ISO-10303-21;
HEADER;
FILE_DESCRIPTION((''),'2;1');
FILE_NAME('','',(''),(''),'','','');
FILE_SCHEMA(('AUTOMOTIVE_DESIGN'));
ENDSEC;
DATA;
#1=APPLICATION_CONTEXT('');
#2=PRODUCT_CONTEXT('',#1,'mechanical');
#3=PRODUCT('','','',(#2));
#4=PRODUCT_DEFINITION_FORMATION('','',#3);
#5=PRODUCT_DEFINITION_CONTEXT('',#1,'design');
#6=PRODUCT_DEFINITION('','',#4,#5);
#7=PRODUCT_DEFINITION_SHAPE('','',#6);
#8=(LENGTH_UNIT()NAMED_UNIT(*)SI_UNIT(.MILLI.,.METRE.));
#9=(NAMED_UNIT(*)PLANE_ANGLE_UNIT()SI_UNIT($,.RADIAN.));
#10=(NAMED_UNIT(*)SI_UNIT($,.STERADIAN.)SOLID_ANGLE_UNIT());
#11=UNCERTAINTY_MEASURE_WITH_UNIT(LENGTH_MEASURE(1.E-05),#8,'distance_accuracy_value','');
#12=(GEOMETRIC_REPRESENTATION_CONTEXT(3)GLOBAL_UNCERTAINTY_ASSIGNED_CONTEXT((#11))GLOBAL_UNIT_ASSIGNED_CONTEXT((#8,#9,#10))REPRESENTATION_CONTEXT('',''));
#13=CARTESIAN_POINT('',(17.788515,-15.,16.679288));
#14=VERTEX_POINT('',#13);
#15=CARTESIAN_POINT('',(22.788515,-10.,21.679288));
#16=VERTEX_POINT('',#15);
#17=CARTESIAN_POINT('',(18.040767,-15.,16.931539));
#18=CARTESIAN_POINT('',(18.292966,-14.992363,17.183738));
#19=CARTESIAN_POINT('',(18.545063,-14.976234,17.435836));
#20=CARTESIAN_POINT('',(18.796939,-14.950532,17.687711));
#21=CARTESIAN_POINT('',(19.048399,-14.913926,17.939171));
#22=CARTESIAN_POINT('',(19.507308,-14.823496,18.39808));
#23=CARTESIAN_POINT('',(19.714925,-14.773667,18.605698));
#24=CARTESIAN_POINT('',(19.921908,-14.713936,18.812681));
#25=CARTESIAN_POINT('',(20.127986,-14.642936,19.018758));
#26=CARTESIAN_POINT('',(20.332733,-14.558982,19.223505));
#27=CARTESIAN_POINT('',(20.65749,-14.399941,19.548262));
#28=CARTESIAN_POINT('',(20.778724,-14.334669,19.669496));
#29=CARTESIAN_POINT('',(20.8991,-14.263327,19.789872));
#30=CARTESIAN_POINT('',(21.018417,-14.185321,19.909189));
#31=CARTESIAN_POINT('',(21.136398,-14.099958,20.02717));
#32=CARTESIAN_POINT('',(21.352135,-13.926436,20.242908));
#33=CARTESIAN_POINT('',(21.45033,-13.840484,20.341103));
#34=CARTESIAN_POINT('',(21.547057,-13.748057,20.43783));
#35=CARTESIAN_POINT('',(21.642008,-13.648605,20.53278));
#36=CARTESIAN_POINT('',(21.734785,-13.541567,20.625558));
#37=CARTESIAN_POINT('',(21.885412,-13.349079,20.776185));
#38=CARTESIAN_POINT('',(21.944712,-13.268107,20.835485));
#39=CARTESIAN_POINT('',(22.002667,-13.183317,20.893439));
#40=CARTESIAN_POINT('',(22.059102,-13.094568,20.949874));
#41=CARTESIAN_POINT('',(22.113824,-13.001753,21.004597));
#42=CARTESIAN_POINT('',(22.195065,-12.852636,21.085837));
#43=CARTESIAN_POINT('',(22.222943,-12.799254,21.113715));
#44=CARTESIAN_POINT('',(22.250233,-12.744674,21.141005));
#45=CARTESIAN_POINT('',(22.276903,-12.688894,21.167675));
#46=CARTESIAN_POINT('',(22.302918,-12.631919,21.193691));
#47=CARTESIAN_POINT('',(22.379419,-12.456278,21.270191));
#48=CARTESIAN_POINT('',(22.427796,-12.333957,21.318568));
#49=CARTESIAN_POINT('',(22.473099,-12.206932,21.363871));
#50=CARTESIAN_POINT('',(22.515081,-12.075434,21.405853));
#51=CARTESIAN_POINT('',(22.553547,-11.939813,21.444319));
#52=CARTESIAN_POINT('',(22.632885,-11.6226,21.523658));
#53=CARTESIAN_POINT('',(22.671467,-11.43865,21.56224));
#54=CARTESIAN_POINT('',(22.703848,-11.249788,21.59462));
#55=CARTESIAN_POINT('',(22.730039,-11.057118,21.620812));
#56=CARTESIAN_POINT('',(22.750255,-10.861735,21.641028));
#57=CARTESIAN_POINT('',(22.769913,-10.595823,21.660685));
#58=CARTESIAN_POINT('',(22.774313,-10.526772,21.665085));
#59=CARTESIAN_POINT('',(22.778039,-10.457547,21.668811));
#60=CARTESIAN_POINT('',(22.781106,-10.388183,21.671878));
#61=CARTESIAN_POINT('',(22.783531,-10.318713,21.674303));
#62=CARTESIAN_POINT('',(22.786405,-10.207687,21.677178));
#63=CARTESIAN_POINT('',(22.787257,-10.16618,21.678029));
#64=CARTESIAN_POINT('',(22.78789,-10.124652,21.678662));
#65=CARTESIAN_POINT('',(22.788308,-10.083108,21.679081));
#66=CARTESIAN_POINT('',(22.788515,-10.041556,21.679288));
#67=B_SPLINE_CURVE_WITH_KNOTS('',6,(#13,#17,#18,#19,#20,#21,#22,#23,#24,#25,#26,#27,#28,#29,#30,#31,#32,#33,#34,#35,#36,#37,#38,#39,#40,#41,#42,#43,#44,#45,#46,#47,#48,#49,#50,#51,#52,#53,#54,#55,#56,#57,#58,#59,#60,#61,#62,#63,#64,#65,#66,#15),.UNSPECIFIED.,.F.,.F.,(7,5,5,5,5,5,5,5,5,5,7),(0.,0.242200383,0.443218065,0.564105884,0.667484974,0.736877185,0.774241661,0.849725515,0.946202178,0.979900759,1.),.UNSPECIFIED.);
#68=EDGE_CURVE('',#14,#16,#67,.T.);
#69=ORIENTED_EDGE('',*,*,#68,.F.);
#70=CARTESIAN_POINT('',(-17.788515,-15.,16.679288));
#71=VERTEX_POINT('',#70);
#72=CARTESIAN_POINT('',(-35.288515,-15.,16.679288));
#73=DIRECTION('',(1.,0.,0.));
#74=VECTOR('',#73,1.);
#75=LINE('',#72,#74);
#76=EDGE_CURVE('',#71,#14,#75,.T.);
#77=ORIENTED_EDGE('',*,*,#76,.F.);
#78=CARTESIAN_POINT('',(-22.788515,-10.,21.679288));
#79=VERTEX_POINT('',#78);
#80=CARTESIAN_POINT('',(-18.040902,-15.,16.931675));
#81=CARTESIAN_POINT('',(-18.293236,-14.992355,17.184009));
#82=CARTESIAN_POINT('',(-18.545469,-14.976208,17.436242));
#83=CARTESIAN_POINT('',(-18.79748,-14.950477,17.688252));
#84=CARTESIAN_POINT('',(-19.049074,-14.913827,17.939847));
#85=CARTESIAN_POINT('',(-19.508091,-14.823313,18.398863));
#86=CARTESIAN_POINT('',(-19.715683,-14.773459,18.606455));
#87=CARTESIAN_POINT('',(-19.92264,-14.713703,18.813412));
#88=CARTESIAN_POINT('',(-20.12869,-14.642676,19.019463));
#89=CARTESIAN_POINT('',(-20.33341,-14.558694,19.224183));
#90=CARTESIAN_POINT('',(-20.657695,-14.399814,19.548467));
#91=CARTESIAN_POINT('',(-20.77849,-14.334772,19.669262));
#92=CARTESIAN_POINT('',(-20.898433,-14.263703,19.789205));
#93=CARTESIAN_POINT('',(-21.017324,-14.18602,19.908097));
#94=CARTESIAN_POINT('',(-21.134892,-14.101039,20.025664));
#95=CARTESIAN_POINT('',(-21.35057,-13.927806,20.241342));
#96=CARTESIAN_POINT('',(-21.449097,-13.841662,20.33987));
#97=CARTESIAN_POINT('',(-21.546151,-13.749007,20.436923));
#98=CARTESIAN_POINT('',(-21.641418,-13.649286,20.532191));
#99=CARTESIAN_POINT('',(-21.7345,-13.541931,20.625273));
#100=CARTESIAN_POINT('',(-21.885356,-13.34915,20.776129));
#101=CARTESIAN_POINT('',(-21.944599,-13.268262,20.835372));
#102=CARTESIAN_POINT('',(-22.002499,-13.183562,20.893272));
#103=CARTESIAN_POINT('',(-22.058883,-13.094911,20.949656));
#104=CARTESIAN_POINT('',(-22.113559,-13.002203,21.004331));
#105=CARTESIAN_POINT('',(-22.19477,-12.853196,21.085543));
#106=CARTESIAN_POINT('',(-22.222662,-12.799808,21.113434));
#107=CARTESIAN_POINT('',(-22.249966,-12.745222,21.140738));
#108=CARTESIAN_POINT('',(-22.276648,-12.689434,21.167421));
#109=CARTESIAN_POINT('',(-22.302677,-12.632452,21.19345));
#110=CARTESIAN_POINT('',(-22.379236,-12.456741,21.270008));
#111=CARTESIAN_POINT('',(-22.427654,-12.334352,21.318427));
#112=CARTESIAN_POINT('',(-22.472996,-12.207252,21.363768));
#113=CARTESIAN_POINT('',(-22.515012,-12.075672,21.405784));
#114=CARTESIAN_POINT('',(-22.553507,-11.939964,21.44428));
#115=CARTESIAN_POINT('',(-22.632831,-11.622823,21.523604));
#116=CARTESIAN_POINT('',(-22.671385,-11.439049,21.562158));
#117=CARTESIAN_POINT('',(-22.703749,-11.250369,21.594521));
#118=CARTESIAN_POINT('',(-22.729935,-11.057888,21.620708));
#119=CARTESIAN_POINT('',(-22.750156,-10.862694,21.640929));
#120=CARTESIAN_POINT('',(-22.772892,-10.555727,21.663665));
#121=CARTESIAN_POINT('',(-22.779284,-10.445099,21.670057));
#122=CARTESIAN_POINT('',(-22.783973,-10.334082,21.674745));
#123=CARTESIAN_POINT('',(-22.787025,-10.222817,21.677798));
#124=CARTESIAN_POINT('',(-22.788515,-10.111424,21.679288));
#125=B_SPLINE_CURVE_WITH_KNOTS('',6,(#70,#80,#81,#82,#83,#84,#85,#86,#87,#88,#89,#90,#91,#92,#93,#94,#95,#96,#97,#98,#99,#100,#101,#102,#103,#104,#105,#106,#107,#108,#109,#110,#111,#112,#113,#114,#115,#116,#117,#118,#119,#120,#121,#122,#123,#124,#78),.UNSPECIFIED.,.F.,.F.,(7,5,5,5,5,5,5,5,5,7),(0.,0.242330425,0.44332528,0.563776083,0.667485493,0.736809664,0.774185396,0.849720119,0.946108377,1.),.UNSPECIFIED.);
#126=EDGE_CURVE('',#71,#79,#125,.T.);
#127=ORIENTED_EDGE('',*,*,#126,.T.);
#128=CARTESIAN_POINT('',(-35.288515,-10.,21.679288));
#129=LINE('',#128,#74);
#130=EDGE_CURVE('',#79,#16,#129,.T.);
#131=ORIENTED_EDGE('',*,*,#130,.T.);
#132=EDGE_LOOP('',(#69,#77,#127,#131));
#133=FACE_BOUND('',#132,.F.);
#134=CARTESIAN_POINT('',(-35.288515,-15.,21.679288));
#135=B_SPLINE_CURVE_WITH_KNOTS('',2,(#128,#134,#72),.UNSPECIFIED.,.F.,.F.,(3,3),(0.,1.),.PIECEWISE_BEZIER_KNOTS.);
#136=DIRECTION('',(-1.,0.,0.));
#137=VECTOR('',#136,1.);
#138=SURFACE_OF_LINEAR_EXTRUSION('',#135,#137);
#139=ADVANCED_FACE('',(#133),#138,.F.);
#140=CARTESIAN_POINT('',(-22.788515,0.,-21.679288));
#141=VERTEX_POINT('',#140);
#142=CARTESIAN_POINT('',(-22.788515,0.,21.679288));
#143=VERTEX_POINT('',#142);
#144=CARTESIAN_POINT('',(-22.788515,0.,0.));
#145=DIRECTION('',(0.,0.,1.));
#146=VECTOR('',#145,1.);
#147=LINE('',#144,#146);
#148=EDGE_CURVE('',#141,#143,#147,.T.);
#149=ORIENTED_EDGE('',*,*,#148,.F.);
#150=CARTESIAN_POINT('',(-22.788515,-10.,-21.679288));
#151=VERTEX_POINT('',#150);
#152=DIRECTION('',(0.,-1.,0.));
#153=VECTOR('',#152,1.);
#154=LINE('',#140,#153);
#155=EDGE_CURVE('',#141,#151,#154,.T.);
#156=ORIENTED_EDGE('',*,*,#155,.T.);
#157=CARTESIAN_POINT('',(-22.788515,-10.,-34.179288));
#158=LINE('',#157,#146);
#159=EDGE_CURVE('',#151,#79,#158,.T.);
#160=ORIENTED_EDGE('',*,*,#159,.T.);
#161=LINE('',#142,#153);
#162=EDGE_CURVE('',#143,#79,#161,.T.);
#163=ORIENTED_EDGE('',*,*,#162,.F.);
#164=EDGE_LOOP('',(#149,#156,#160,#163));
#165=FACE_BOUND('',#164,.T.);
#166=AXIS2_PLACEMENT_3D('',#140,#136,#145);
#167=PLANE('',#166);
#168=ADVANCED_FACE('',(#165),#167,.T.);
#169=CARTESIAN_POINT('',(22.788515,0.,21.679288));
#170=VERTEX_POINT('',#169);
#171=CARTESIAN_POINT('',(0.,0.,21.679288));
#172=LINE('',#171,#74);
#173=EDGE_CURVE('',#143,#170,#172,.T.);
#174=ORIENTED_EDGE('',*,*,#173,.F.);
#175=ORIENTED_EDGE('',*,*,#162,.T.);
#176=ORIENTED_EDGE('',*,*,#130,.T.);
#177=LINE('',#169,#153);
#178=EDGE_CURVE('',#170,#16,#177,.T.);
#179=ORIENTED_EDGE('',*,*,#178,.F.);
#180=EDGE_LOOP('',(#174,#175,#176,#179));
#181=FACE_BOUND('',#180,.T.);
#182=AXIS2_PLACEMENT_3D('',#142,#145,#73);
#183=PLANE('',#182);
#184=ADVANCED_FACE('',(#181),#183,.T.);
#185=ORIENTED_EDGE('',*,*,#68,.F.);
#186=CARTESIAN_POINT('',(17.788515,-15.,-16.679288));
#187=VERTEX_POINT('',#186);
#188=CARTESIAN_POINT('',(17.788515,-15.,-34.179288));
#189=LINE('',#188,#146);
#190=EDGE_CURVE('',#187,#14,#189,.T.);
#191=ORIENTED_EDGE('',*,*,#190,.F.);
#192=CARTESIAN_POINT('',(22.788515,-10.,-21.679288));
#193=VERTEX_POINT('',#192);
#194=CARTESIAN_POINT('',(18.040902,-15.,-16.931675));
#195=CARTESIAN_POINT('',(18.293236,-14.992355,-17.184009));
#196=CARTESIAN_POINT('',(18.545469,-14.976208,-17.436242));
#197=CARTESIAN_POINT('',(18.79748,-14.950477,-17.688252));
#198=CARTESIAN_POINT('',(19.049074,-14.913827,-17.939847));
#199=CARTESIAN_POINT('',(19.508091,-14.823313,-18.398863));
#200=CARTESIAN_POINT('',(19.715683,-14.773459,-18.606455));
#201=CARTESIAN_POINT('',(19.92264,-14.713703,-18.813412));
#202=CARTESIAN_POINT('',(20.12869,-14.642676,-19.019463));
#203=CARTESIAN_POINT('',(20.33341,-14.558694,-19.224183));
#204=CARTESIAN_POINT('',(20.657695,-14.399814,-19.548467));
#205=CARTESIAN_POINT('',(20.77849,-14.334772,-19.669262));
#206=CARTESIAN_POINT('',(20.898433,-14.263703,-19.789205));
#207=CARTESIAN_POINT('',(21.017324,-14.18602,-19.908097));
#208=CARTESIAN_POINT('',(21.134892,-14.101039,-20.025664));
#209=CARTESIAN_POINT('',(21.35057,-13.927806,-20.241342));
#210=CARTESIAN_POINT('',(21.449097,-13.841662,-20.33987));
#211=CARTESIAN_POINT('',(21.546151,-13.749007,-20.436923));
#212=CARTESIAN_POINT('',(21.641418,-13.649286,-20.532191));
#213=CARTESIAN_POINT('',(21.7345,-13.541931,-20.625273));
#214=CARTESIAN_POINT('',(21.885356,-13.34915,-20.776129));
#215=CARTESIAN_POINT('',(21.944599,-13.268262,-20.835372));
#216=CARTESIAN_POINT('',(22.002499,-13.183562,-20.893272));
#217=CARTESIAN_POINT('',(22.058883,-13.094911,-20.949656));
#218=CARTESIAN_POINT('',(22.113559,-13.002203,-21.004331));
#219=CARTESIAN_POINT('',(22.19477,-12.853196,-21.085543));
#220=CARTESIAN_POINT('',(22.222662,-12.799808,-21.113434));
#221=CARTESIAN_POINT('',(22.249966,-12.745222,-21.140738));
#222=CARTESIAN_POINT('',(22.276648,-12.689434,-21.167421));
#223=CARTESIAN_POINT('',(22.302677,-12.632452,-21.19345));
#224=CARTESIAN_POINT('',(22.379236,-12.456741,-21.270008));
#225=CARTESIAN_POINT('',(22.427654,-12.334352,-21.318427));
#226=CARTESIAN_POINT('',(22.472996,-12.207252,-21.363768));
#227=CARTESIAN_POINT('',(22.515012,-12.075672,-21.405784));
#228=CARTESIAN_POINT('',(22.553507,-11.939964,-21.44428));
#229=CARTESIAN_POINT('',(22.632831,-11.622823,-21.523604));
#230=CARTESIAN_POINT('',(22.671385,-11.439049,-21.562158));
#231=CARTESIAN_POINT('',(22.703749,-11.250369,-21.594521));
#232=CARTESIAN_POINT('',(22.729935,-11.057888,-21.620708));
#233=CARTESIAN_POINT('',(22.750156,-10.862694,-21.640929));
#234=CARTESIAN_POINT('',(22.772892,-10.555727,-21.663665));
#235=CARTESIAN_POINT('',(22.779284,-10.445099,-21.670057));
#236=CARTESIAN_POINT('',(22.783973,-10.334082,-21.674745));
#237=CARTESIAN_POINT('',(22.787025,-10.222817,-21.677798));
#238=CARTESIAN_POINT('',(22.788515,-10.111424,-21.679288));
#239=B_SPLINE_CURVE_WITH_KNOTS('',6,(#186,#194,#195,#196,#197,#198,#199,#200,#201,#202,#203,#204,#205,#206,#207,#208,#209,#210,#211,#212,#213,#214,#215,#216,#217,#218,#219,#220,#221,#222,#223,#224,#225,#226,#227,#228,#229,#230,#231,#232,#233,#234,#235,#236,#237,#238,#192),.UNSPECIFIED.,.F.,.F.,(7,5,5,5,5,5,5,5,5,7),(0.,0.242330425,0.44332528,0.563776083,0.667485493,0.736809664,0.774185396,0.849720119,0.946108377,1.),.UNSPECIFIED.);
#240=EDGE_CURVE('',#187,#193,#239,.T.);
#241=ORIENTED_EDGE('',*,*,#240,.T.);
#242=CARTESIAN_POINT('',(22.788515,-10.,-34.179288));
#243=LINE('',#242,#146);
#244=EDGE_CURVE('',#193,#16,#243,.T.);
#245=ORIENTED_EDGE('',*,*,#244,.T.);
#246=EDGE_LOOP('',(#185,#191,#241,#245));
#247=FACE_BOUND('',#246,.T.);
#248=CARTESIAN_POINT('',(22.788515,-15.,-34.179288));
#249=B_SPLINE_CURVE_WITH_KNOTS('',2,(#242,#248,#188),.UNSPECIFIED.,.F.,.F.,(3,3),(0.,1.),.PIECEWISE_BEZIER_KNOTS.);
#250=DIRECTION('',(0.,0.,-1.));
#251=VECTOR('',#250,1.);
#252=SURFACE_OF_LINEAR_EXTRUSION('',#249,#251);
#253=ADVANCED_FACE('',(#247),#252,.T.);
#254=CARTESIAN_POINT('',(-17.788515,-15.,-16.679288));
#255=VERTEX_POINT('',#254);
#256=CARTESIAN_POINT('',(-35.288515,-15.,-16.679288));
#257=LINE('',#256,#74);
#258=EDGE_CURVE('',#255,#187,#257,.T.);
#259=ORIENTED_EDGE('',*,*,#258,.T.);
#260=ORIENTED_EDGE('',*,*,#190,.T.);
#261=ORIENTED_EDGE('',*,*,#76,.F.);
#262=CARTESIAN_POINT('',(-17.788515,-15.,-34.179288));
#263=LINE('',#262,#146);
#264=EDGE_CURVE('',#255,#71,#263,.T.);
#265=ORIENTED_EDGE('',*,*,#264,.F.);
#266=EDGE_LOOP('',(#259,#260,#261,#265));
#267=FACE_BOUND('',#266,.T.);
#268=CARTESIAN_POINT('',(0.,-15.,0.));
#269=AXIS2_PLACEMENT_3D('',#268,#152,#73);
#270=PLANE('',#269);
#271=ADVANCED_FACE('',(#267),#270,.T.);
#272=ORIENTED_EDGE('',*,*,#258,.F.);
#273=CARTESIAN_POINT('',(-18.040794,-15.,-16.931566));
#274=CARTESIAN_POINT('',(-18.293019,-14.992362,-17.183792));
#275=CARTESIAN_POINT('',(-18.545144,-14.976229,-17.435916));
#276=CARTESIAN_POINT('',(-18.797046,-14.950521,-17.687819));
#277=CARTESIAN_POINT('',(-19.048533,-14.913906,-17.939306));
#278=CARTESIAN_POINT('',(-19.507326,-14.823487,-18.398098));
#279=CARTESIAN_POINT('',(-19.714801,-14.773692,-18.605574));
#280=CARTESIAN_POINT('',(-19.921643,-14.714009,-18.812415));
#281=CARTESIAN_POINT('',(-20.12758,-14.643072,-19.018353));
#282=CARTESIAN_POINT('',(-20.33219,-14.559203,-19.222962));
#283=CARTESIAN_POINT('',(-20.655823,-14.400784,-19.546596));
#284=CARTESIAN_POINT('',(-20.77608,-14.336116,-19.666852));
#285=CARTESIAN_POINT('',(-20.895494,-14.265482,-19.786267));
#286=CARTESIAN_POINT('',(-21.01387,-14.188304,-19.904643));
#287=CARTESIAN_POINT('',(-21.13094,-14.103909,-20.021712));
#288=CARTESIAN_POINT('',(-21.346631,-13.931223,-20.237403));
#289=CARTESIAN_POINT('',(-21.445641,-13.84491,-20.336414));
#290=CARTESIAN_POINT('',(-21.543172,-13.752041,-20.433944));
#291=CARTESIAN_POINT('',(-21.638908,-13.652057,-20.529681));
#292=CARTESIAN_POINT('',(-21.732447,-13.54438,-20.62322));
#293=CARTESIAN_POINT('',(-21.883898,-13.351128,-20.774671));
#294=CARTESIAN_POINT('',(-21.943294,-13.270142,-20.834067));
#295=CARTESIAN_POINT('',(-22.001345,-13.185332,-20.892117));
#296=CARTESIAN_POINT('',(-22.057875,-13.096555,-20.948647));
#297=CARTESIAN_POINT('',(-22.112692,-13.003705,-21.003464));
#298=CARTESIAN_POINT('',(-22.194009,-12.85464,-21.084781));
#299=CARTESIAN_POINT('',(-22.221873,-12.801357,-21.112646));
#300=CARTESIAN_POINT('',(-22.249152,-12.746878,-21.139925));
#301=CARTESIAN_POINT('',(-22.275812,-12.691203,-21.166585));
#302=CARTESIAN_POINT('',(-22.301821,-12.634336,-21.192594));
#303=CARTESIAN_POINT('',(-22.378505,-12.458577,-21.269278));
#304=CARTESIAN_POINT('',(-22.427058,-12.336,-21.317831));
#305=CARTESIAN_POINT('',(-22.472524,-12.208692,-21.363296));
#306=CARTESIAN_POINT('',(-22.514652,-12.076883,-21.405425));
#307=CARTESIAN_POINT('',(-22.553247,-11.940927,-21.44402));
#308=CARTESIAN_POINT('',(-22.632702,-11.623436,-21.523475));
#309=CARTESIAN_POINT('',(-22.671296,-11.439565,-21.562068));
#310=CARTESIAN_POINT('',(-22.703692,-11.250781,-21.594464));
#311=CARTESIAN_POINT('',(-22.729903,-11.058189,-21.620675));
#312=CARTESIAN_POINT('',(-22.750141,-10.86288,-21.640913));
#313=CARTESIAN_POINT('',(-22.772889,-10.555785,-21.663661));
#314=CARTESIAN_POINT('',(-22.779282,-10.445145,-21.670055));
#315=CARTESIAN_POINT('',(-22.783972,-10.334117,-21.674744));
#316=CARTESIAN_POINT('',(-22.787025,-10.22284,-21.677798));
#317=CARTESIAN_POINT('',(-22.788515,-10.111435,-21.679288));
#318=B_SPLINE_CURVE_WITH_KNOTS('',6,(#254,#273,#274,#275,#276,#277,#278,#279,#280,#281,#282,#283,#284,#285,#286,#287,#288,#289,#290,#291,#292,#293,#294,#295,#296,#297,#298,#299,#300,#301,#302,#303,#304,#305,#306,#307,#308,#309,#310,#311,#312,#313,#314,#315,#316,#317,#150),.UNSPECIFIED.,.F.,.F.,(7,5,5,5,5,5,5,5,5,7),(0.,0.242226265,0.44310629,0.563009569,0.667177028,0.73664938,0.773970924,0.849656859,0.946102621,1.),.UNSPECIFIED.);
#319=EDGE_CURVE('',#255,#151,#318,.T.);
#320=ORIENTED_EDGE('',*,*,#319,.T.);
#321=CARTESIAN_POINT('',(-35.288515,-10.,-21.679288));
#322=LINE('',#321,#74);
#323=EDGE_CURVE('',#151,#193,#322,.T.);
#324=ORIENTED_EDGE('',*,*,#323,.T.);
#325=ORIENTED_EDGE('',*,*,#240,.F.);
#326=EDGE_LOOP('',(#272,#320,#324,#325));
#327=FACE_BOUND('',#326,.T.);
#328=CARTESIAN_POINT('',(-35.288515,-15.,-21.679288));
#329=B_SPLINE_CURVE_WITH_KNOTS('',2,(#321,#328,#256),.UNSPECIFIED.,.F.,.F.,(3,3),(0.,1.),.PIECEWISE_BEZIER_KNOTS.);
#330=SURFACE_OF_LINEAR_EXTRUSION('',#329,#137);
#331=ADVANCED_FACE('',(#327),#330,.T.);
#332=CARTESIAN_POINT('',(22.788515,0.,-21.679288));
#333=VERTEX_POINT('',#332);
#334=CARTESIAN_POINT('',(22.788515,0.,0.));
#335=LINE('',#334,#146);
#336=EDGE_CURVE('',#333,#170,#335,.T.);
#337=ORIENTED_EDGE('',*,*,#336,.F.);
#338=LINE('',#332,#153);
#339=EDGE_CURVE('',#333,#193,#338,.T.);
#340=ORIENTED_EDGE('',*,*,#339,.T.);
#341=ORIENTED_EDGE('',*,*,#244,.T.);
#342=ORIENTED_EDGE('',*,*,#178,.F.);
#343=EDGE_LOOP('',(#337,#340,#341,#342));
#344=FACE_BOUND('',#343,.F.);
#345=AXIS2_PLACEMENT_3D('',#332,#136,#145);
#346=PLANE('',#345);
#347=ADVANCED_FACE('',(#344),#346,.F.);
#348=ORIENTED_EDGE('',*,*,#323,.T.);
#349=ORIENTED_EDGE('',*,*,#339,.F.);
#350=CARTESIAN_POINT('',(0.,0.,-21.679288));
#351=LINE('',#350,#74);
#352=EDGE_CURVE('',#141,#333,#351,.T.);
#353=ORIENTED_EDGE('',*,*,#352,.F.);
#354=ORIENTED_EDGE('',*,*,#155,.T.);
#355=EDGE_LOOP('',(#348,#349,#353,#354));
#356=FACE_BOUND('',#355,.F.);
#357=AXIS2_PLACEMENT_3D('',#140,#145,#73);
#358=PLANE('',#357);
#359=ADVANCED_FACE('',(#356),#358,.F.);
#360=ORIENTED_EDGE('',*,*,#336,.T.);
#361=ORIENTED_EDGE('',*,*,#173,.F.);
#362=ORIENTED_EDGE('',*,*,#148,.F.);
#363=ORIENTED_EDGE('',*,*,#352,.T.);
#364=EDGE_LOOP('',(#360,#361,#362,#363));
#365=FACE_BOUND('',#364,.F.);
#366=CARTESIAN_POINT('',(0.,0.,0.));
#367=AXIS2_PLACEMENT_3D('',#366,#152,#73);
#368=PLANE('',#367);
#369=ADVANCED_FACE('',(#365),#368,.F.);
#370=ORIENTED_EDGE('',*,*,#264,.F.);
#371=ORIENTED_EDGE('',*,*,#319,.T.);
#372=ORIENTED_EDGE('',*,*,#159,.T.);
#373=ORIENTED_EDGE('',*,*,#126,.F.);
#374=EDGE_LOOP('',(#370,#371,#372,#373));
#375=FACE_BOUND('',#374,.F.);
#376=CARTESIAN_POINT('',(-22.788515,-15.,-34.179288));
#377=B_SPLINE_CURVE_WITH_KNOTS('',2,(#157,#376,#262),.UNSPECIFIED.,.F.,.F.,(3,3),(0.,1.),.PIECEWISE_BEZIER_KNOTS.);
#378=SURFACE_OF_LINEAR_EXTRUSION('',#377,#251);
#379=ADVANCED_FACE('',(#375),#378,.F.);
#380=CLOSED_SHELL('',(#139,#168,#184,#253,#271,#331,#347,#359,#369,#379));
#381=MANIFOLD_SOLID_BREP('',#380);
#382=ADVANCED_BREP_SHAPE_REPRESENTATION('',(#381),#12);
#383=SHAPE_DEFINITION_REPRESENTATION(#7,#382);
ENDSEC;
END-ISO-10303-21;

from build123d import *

# Parameters (mm, degrees)
F0_W        = 45.5770306289
F0_H        = 43.3585755527
F1_DEPTH    = 15
F2_T1_DEPTH = 70.5770306289
F2_T3_DEPTH = 68.3585755527


# Not quite as in the source:
# - a fillet or chamfer that OpenCascade refuses, or shapes differently, is made with other operations: its cross-section is extruded or revolved along the edge and cut away or added


with BuildPart() as f1:
    # F0 (on Front) → F1 (new body)
    with BuildSketch(Plane.XZ):
        Rectangle(F0_W, F0_H)
    extrude(amount=F1_DEPTH)

    # F2: fillet of radius 5 on 4 edges, made by hand

    # F2_s2 → F2_t1 (cut)
    with BuildSketch(Plane.YZ.offset(-35.2885153145)):
        with BuildLine():
            add(Edge.make_bspline(
                [(-10, 21.6792877764), (-15, 21.6792877764), (-15, 16.6792877764)],
                knots=[0, 0, 0, 1, 1, 1], degree=2, weights=[1, 1, 1]))
            Line((-15, 16.6792877764), (-15, 21.6792877764))
            Line((-15, 21.6792877764), (-10, 21.6792877764))
        make_face()
        with BuildLine():
            add(Edge.make_bspline(
                [(-10, -21.6792877764), (-15, -21.6792877764), (-15, -16.6792877764)],
                knots=[0, 0, 0, 1, 1, 1], degree=2, weights=[1, 1, 1]))
            Line((-15, -16.6792877764), (-15, -21.6792877764))
            Line((-15, -21.6792877764), (-10, -21.6792877764))
        make_face()
    extrude(amount=F2_T1_DEPTH, mode=Mode.SUBTRACT)

    # F2_s4 → F2_t3 (cut)
    with BuildSketch(Plane.XY.offset(-34.1792877764)):
        with BuildLine():
            add(Edge.make_bspline(
                [(22.7885153145, -10), (22.7885153145, -15), (17.7885153145, -15)],
                knots=[0, 0, 0, 1, 1, 1], degree=2, weights=[1, 1, 1]))
            Line((17.7885153145, -15), (22.7885153145, -15))
            Line((22.7885153145, -15), (22.7885153145, -10))
        make_face()
        with BuildLine():
            add(Edge.make_bspline(
                [(-22.7885153145, -10), (-22.7885153145, -15), (-17.7885153145, -15)],
                knots=[0, 0, 0, 1, 1, 1], degree=2, weights=[1, 1, 1]))
            Line((-17.7885153145, -15), (-22.7885153145, -15))
            Line((-22.7885153145, -15), (-22.7885153145, -10))
        make_face()
    extrude(amount=F2_T3_DEPTH, mode=Mode.SUBTRACT)


solid = f1.part
